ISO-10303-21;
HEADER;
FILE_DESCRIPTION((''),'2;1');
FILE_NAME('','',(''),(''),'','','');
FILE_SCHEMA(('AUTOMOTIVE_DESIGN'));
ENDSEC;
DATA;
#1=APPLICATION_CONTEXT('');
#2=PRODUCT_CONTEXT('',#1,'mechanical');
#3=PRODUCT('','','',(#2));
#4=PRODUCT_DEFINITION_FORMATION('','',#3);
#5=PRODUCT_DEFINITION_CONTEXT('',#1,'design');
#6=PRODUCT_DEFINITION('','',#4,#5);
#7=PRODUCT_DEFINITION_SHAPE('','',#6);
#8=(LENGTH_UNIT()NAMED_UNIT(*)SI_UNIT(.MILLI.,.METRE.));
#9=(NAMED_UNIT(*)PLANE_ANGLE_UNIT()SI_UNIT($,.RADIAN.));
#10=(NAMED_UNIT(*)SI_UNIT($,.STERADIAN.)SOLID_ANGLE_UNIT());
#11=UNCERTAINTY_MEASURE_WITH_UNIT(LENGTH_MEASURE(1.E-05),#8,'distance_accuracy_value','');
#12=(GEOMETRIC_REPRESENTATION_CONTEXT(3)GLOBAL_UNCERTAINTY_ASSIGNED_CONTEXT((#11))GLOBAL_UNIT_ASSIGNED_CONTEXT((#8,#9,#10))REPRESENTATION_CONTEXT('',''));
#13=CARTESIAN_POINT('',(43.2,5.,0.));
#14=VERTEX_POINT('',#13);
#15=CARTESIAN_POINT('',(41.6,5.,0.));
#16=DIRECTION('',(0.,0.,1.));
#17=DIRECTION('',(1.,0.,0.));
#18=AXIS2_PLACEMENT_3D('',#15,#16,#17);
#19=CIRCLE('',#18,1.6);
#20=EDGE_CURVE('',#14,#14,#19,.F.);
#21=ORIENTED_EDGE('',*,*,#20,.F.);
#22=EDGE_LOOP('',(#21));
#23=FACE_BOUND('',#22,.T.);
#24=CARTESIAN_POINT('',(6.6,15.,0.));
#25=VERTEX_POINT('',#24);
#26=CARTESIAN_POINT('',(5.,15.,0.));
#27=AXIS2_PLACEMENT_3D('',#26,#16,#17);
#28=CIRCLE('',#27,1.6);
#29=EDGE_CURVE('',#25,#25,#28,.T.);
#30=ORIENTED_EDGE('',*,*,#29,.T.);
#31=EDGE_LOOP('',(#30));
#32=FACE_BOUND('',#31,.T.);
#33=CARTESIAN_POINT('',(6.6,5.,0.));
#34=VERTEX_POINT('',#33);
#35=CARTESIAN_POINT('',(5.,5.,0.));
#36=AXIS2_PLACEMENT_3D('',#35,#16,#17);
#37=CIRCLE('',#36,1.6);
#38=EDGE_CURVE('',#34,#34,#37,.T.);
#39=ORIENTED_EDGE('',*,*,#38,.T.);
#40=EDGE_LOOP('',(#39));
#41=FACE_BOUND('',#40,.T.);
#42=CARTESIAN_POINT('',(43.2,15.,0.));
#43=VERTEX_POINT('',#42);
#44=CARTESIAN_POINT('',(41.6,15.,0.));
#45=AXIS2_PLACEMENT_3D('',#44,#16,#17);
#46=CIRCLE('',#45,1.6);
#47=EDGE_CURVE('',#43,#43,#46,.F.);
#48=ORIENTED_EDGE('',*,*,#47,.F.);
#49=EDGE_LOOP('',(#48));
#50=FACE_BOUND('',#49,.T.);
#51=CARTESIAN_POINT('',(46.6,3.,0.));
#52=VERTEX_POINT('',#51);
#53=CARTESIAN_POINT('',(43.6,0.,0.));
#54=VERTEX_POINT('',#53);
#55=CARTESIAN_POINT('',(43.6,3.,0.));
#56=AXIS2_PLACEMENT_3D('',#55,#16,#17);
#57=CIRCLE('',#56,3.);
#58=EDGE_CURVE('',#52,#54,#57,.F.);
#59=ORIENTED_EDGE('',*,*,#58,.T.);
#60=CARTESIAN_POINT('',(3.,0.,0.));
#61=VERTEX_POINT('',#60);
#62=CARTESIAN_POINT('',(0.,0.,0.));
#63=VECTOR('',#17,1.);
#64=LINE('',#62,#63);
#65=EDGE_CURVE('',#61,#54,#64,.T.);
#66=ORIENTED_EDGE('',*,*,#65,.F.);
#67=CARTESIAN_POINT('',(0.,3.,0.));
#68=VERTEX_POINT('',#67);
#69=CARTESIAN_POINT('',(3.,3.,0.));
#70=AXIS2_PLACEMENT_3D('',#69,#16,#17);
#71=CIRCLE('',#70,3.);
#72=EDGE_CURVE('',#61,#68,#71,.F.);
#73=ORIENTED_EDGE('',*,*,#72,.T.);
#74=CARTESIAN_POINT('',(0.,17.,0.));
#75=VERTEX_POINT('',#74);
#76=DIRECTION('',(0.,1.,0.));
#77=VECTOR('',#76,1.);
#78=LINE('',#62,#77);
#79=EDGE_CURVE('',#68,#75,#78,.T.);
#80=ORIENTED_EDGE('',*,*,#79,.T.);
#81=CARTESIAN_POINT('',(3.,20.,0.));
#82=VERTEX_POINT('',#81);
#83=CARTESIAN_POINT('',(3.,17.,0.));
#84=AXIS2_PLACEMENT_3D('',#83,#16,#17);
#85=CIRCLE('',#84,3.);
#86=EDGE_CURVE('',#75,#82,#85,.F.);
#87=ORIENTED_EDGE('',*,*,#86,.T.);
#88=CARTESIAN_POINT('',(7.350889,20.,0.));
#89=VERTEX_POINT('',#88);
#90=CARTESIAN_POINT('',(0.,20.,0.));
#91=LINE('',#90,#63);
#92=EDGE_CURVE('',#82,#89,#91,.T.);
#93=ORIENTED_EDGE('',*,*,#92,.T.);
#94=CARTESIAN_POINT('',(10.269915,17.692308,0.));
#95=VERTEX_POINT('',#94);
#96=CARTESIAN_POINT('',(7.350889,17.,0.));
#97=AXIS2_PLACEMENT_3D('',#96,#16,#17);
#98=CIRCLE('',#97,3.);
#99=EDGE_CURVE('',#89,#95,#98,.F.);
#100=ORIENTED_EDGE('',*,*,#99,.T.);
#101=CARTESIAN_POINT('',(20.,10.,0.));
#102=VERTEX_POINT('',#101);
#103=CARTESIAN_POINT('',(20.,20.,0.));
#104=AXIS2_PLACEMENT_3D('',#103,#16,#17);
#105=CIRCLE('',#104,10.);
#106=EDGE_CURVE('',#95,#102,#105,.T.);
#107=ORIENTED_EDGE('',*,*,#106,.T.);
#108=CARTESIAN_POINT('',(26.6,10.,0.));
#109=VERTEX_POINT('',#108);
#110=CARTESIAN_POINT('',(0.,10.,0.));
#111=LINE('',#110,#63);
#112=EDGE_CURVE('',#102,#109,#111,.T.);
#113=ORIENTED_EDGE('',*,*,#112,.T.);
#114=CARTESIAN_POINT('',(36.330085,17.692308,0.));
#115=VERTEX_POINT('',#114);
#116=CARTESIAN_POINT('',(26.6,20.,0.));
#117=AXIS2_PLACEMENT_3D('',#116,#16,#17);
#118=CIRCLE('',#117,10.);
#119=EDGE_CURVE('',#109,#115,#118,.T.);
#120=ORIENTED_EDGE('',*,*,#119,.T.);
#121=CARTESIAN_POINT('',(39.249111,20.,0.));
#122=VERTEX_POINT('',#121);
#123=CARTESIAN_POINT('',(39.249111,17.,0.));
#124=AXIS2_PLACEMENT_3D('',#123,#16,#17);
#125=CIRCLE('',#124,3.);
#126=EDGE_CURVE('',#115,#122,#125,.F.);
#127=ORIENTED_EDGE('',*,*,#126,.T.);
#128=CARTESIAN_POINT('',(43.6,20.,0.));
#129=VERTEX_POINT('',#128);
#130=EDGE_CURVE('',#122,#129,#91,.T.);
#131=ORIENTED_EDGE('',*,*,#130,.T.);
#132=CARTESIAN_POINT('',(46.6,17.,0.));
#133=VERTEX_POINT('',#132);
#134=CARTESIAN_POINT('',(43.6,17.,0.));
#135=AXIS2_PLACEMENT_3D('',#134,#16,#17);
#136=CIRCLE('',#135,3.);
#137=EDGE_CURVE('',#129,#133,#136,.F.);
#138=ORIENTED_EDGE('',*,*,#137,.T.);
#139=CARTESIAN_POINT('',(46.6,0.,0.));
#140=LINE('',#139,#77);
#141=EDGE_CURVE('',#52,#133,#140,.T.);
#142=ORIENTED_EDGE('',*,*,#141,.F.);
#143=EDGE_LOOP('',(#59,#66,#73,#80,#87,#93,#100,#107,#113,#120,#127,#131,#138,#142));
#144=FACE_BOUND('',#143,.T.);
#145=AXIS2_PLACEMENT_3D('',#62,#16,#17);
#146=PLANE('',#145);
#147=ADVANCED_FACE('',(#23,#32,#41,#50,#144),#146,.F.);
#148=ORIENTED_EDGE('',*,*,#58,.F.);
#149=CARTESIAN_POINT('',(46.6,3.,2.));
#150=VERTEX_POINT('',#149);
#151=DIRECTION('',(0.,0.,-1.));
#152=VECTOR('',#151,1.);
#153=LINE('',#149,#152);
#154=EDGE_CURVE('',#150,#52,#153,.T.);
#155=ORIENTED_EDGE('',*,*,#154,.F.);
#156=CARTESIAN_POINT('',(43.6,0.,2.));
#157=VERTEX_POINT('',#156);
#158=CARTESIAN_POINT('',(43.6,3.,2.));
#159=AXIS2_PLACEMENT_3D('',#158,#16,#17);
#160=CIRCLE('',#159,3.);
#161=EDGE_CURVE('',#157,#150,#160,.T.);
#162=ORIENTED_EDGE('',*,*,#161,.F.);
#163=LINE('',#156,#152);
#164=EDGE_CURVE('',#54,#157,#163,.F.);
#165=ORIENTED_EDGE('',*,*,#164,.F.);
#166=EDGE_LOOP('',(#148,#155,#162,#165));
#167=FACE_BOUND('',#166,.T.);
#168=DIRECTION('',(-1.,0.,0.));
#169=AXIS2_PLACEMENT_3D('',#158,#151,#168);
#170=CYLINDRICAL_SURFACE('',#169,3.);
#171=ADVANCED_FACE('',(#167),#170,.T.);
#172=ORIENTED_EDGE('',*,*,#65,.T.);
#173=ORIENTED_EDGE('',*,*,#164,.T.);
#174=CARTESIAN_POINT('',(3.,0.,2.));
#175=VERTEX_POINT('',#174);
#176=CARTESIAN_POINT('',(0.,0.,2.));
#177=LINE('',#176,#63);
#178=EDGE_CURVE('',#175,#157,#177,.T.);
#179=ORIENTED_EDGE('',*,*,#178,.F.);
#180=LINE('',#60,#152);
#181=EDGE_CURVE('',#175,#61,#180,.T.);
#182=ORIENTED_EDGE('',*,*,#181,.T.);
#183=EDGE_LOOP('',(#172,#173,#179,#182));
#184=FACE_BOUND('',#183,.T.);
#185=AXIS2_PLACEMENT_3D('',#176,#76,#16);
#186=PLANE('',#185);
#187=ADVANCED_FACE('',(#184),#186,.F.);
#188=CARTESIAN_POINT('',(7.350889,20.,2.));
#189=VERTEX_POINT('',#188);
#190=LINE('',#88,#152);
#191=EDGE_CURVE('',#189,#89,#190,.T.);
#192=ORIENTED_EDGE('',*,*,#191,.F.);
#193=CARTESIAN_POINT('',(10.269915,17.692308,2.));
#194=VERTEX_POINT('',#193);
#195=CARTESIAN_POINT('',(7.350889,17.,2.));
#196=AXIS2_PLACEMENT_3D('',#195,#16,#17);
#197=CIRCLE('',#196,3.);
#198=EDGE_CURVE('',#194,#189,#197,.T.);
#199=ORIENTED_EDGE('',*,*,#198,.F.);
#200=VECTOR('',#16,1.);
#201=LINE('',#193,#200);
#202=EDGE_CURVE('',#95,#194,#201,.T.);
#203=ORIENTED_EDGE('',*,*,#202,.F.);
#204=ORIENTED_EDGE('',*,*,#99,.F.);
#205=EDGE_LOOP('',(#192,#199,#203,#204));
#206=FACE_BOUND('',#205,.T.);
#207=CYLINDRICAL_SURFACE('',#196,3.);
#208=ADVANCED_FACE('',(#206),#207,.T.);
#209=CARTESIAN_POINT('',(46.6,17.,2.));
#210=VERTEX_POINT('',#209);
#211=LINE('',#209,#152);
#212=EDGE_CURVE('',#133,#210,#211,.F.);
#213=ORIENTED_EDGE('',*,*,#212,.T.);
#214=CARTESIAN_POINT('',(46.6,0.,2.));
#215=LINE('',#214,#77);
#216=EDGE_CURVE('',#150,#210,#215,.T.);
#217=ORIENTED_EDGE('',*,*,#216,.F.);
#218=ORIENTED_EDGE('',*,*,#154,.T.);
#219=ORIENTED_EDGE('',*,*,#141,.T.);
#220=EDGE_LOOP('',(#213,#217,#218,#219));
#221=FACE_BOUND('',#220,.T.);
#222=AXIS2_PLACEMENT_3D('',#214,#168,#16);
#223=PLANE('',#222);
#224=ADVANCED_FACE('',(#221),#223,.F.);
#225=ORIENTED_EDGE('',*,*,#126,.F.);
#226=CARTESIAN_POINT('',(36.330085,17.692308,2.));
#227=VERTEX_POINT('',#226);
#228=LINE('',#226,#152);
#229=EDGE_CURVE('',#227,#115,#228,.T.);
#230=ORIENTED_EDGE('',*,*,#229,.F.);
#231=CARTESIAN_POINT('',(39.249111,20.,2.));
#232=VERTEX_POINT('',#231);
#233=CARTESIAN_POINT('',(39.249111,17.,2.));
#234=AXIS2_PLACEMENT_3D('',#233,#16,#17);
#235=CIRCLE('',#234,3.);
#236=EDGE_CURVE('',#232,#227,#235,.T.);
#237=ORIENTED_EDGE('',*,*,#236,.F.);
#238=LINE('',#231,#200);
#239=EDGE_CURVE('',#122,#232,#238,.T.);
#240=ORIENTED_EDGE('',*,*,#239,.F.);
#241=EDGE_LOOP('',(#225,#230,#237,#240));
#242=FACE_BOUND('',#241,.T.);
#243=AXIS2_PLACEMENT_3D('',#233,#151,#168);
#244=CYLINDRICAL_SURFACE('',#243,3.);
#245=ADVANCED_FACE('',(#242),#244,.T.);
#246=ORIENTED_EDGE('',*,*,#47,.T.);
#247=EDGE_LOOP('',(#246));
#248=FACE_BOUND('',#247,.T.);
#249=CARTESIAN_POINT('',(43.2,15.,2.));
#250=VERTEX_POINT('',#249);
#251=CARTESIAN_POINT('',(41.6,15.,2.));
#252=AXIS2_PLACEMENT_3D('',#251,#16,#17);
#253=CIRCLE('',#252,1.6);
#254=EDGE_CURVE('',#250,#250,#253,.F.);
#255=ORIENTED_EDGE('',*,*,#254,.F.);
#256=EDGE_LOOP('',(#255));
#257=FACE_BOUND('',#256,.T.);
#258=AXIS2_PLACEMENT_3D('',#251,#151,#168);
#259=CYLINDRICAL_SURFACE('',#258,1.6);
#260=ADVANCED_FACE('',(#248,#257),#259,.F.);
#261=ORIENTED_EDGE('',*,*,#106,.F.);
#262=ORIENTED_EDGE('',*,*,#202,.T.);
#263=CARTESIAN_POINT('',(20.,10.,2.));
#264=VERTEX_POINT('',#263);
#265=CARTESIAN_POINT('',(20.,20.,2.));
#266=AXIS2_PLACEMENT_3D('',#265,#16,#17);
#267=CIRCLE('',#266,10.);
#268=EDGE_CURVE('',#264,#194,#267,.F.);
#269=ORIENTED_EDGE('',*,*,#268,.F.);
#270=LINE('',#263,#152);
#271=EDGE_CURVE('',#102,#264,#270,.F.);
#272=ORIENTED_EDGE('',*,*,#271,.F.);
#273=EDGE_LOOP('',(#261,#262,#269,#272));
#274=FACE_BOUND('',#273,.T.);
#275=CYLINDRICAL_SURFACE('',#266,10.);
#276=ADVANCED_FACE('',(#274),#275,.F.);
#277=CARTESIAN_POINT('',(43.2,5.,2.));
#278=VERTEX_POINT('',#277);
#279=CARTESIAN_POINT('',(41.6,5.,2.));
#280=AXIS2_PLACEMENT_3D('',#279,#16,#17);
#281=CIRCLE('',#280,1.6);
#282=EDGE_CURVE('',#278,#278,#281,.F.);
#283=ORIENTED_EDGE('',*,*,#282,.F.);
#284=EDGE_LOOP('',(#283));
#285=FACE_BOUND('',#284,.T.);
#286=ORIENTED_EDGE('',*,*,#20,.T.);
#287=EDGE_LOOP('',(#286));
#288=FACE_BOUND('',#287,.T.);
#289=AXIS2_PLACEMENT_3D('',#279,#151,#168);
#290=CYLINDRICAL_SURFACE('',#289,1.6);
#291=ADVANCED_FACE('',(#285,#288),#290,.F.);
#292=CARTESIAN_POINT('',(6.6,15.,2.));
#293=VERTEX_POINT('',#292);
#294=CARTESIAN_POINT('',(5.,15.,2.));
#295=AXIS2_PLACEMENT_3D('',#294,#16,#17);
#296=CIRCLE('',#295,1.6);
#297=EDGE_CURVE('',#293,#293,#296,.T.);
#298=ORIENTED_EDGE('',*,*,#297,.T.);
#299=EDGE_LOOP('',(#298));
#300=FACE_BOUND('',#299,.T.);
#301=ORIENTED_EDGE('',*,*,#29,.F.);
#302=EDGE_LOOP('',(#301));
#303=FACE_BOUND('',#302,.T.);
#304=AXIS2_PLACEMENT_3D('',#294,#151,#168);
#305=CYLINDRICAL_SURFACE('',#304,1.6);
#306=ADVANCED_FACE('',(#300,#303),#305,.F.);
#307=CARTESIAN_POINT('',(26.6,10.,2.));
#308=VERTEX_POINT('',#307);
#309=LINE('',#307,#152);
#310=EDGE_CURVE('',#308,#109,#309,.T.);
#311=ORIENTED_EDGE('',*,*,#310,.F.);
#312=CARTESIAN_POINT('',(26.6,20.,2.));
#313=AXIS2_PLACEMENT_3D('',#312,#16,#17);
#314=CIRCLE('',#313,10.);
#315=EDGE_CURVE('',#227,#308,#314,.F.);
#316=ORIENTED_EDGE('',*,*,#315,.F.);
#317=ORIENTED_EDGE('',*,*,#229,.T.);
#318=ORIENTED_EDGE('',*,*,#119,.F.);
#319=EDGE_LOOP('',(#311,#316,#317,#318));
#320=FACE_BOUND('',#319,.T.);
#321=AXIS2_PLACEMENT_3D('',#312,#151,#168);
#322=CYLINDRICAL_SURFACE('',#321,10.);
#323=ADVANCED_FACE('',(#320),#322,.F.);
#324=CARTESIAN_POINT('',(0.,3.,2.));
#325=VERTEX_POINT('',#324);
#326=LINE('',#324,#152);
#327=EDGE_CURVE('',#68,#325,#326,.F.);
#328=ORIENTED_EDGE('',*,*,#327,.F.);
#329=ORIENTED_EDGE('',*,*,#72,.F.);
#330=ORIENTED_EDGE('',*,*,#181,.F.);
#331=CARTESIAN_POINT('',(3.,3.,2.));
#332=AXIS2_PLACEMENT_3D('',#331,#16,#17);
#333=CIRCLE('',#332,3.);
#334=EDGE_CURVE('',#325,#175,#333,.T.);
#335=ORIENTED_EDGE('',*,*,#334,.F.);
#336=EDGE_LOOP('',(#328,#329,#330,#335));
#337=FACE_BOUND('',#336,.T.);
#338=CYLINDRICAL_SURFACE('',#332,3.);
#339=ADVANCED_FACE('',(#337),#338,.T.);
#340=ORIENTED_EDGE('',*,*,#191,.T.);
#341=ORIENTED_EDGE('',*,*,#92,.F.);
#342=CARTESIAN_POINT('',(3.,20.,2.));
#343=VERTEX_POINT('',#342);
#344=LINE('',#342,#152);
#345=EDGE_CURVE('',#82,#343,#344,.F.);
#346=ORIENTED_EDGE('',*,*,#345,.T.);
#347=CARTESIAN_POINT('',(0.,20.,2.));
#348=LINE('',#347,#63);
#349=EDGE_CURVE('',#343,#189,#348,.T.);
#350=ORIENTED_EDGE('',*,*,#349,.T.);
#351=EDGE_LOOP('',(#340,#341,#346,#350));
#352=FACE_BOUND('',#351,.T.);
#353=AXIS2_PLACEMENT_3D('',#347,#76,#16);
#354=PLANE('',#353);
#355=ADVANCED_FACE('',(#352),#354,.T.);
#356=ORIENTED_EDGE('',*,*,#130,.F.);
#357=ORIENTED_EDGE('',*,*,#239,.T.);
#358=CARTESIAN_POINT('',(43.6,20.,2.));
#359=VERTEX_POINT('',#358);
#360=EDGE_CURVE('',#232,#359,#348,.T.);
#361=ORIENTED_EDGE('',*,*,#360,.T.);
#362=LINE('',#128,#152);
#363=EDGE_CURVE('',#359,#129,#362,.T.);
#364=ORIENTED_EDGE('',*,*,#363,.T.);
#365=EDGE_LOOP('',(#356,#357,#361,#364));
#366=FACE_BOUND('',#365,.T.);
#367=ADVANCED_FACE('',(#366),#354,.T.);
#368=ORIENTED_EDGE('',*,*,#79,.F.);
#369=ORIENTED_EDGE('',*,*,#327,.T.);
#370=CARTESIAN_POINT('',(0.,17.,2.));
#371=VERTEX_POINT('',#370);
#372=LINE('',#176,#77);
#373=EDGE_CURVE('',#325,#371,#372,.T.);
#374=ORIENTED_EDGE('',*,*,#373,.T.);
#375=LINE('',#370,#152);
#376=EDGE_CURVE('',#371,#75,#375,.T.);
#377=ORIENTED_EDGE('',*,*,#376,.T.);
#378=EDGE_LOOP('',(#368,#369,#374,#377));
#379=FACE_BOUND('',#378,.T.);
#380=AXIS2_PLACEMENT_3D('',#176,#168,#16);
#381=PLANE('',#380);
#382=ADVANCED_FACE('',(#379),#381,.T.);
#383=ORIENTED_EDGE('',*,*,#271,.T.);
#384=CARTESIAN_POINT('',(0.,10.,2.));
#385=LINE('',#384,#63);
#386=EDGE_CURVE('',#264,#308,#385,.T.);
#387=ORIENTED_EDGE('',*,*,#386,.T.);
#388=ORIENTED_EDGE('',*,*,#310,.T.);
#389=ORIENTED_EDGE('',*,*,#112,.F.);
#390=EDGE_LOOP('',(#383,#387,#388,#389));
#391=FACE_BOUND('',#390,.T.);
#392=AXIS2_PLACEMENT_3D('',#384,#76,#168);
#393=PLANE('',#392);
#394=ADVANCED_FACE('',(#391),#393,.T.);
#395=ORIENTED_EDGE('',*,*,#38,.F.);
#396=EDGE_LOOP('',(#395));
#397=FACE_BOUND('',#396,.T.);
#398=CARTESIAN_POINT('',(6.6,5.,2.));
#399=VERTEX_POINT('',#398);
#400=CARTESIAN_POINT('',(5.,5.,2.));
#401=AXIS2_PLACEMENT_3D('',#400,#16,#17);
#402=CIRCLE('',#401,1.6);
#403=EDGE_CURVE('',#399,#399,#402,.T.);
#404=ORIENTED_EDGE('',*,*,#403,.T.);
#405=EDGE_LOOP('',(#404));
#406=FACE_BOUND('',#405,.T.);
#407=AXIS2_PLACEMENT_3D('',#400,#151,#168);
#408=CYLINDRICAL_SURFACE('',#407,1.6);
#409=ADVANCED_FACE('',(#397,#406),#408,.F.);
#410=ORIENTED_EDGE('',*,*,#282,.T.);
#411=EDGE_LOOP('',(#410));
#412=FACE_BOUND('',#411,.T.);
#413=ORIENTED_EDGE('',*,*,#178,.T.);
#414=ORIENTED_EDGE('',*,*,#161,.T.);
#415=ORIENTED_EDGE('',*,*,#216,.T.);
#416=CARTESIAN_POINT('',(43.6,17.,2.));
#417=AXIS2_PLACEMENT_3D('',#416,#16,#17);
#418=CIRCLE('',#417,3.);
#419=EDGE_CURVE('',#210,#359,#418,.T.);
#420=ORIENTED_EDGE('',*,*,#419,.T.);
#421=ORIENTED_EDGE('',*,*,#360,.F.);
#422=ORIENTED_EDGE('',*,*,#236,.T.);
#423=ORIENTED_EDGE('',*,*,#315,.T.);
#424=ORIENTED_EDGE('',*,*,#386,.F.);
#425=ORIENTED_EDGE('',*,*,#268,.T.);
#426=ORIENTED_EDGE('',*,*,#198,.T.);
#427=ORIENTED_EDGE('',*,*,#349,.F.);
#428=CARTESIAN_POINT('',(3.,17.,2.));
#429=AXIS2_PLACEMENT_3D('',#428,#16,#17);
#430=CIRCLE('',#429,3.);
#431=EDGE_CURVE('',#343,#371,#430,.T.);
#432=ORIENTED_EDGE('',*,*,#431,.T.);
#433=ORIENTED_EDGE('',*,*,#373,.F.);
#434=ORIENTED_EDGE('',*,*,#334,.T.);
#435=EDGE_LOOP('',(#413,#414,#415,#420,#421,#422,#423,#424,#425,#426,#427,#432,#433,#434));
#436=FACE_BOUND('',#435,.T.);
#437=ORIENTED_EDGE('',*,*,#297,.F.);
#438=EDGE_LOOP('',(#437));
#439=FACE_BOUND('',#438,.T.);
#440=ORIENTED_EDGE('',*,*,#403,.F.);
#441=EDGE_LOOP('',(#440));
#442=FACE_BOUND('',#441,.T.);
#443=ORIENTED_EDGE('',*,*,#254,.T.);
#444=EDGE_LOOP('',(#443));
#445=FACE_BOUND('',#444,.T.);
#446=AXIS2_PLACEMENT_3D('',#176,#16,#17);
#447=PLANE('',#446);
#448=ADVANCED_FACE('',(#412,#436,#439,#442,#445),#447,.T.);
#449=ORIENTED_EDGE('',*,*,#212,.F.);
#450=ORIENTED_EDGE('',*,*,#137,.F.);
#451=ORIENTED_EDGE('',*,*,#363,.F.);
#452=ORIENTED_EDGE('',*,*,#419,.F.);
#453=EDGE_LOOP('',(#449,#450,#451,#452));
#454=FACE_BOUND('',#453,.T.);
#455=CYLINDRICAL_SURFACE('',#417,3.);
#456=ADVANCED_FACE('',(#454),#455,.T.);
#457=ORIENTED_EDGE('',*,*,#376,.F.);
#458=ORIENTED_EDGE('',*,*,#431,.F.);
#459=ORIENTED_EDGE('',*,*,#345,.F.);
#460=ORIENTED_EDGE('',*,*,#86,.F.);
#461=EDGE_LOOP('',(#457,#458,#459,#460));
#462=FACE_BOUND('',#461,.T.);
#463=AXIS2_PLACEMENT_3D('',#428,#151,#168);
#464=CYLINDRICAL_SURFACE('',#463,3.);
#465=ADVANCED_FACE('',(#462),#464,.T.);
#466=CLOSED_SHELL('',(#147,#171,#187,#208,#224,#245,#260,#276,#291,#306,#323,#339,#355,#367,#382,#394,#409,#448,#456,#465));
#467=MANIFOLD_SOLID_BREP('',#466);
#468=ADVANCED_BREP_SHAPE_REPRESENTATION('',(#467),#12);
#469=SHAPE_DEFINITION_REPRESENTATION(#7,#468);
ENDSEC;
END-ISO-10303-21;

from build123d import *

# Parameters (mm, degrees)
SKETCH_1_R      = 1.6
EXTRUDE_1_DEPTH = 2
FILLET_1_R      = 10
FILLET_2_R      = 3


with BuildPart() as part:
    # ｽｹｯﾁ1 → ﾎﾞｽ - 押し出し1 (new body)
    with BuildSketch(Plane.XY):
        Polygon((0, 20), (0, 0), (46.6, 0), (46.6, 20), (36.6, 20), (36.6, 10), (10, 10), (10, 20), align=None)
        with Locations((5, 5)):
            Circle(SKETCH_1_R, mode=Mode.SUBTRACT)
        with Locations((41.6, 5)):
            Circle(SKETCH_1_R, mode=Mode.SUBTRACT)
        with Locations((5, 15)):
            Circle(SKETCH_1_R, mode=Mode.SUBTRACT)
        with Locations((41.6, 15)):
            Circle(SKETCH_1_R, mode=Mode.SUBTRACT)
    extrude(amount=EXTRUDE_1_DEPTH)

    # ﾌｨﾚｯﾄ1
    fillet_1_edges = [part.edges().sort_by_distance(p)[0] for p in [
        (36.6, 10, 1),
        (10, 10, 1),
    ]]
    fillet(fillet_1_edges, radius=FILLET_1_R - 0.0001)  # a hair under: the kernel refuses the full size

    # ﾌｨﾚｯﾄ2
    fillet_2_edges = [part.edges().sort_by_distance(p)[0] for p in [
        (46.6, 20, 1),
        (46.6, 0, 1),
        (0, 0, 1),
        (0, 20, 1),
        (10, 20, 1),
        (36.6, 20, 1),
    ]]
    fillet(fillet_2_edges, radius=FILLET_2_R)


solid = part.part
